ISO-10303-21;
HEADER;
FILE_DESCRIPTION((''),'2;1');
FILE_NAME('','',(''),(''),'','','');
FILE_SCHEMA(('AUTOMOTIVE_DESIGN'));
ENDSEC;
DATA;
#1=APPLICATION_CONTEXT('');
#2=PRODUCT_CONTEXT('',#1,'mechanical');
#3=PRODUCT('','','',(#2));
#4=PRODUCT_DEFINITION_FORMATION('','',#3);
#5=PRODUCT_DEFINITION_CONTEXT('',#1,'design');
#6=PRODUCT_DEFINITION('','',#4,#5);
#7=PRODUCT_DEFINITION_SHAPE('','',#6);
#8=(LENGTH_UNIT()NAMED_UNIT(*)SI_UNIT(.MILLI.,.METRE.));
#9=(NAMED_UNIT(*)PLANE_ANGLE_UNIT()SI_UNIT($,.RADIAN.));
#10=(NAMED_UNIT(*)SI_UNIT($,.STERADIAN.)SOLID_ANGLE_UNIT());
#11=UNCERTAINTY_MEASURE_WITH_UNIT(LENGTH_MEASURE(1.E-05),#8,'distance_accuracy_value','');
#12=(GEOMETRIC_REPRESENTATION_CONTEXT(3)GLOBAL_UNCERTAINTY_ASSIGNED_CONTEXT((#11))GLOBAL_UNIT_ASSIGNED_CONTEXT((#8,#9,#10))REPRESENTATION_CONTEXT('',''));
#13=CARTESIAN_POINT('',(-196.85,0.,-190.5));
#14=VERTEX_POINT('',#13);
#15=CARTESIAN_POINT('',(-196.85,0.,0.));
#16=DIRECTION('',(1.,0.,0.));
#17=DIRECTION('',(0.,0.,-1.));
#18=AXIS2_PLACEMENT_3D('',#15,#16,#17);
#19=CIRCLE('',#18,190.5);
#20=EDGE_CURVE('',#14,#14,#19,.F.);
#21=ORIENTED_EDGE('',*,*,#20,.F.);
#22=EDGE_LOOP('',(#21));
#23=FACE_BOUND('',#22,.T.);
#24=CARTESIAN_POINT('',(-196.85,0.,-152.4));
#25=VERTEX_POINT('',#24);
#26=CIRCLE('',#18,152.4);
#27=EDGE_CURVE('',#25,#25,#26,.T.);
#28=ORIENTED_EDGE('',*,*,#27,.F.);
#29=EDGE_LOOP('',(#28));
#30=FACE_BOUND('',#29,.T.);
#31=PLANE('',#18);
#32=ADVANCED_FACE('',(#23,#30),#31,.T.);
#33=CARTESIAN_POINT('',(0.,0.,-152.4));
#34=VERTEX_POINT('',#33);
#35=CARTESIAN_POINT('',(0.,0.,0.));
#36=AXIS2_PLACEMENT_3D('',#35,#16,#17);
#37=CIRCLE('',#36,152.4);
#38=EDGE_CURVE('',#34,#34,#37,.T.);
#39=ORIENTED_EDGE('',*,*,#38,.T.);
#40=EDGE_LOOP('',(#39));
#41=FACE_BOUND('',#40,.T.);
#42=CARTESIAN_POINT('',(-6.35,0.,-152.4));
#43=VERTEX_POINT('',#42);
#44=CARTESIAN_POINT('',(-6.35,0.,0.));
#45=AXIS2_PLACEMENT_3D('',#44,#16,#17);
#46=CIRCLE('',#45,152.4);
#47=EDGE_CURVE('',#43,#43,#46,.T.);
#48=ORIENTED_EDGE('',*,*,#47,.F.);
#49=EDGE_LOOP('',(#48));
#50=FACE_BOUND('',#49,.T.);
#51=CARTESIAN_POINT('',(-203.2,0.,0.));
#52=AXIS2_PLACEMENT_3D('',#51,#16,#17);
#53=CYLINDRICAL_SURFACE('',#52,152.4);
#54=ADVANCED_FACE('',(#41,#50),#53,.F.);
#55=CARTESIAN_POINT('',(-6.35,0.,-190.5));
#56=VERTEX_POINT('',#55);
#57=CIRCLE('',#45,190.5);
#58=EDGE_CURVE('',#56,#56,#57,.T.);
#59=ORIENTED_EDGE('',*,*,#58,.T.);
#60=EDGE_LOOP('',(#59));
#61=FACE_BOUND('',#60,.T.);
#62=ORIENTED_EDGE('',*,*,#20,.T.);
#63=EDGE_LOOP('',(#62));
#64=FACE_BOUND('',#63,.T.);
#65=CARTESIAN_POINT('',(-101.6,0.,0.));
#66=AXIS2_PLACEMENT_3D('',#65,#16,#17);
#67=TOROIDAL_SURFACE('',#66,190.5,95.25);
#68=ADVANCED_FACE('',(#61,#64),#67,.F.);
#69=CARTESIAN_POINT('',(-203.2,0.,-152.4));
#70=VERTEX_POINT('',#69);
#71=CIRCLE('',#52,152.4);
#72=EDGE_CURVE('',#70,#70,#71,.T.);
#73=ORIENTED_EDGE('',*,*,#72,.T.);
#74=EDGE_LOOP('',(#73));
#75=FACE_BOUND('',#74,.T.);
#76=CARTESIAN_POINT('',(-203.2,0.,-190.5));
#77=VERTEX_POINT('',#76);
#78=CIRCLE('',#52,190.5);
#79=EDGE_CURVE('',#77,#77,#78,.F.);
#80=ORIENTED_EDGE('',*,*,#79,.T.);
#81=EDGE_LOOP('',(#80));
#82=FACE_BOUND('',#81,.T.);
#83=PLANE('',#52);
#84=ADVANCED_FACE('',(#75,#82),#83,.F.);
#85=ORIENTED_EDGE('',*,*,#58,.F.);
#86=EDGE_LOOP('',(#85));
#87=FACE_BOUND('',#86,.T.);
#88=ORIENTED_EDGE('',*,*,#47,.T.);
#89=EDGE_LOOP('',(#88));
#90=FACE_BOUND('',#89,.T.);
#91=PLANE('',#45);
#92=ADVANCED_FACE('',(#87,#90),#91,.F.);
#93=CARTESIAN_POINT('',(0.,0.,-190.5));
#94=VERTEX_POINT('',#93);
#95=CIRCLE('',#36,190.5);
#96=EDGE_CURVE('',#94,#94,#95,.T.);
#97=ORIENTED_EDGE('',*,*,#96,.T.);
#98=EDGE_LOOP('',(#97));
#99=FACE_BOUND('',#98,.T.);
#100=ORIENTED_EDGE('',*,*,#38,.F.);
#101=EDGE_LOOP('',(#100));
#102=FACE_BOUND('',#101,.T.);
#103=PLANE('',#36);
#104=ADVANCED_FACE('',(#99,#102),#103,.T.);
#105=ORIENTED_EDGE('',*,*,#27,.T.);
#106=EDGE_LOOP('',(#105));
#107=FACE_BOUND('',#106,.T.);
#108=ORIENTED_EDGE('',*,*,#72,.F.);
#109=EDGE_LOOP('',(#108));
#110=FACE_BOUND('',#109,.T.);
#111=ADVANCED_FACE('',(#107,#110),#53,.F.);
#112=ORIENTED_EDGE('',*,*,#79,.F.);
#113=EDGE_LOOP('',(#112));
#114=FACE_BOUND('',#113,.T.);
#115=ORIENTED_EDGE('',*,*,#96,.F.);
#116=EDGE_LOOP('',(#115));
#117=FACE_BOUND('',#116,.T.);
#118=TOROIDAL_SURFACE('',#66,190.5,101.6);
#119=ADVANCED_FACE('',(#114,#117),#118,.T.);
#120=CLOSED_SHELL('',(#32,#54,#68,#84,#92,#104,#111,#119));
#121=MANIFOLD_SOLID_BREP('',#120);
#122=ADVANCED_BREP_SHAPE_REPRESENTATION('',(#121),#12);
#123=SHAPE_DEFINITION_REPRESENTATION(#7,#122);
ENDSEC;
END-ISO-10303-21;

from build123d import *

# Parameters (mm, degrees)
SKETCH2_R           = 292.1
SKETCH2_R_2         = 152.4
BOSS_EXTRUDE1_DEPTH = 203.2
FILLET1_R           = 101.6
SHELL1_T            = -6.35


with BuildPart() as part:
    # Sketch2 → Boss-Extrude1 (new body)
    with BuildSketch(Plane(origin=(0, 0, 0), x_dir=(0, 0, -1), z_dir=(1, 0, 0))):
        Circle(SKETCH2_R)
        Circle(SKETCH2_R_2, mode=Mode.SUBTRACT)
    extrude(amount=-BOSS_EXTRUDE1_DEPTH)

    # Fillet1
    fillet1_edges = [part.edges().sort_by_distance(p)[0] for p in [
        (0, 0, 292.1),
        (-203.2, 0, 292.1),
    ]]
    fillet(fillet1_edges, radius=FILLET1_R - 0.0001)  # a hair under: the kernel refuses the full size

    # Shell1
    shell1_openings = [part.faces().sort_by_distance(p)[0] for p in [
        (-101.6, 0, 152.4),
    ]]
    offset(amount=SHELL1_T, openings=shell1_openings, kind=Kind.INTERSECTION)


solid = part.part
